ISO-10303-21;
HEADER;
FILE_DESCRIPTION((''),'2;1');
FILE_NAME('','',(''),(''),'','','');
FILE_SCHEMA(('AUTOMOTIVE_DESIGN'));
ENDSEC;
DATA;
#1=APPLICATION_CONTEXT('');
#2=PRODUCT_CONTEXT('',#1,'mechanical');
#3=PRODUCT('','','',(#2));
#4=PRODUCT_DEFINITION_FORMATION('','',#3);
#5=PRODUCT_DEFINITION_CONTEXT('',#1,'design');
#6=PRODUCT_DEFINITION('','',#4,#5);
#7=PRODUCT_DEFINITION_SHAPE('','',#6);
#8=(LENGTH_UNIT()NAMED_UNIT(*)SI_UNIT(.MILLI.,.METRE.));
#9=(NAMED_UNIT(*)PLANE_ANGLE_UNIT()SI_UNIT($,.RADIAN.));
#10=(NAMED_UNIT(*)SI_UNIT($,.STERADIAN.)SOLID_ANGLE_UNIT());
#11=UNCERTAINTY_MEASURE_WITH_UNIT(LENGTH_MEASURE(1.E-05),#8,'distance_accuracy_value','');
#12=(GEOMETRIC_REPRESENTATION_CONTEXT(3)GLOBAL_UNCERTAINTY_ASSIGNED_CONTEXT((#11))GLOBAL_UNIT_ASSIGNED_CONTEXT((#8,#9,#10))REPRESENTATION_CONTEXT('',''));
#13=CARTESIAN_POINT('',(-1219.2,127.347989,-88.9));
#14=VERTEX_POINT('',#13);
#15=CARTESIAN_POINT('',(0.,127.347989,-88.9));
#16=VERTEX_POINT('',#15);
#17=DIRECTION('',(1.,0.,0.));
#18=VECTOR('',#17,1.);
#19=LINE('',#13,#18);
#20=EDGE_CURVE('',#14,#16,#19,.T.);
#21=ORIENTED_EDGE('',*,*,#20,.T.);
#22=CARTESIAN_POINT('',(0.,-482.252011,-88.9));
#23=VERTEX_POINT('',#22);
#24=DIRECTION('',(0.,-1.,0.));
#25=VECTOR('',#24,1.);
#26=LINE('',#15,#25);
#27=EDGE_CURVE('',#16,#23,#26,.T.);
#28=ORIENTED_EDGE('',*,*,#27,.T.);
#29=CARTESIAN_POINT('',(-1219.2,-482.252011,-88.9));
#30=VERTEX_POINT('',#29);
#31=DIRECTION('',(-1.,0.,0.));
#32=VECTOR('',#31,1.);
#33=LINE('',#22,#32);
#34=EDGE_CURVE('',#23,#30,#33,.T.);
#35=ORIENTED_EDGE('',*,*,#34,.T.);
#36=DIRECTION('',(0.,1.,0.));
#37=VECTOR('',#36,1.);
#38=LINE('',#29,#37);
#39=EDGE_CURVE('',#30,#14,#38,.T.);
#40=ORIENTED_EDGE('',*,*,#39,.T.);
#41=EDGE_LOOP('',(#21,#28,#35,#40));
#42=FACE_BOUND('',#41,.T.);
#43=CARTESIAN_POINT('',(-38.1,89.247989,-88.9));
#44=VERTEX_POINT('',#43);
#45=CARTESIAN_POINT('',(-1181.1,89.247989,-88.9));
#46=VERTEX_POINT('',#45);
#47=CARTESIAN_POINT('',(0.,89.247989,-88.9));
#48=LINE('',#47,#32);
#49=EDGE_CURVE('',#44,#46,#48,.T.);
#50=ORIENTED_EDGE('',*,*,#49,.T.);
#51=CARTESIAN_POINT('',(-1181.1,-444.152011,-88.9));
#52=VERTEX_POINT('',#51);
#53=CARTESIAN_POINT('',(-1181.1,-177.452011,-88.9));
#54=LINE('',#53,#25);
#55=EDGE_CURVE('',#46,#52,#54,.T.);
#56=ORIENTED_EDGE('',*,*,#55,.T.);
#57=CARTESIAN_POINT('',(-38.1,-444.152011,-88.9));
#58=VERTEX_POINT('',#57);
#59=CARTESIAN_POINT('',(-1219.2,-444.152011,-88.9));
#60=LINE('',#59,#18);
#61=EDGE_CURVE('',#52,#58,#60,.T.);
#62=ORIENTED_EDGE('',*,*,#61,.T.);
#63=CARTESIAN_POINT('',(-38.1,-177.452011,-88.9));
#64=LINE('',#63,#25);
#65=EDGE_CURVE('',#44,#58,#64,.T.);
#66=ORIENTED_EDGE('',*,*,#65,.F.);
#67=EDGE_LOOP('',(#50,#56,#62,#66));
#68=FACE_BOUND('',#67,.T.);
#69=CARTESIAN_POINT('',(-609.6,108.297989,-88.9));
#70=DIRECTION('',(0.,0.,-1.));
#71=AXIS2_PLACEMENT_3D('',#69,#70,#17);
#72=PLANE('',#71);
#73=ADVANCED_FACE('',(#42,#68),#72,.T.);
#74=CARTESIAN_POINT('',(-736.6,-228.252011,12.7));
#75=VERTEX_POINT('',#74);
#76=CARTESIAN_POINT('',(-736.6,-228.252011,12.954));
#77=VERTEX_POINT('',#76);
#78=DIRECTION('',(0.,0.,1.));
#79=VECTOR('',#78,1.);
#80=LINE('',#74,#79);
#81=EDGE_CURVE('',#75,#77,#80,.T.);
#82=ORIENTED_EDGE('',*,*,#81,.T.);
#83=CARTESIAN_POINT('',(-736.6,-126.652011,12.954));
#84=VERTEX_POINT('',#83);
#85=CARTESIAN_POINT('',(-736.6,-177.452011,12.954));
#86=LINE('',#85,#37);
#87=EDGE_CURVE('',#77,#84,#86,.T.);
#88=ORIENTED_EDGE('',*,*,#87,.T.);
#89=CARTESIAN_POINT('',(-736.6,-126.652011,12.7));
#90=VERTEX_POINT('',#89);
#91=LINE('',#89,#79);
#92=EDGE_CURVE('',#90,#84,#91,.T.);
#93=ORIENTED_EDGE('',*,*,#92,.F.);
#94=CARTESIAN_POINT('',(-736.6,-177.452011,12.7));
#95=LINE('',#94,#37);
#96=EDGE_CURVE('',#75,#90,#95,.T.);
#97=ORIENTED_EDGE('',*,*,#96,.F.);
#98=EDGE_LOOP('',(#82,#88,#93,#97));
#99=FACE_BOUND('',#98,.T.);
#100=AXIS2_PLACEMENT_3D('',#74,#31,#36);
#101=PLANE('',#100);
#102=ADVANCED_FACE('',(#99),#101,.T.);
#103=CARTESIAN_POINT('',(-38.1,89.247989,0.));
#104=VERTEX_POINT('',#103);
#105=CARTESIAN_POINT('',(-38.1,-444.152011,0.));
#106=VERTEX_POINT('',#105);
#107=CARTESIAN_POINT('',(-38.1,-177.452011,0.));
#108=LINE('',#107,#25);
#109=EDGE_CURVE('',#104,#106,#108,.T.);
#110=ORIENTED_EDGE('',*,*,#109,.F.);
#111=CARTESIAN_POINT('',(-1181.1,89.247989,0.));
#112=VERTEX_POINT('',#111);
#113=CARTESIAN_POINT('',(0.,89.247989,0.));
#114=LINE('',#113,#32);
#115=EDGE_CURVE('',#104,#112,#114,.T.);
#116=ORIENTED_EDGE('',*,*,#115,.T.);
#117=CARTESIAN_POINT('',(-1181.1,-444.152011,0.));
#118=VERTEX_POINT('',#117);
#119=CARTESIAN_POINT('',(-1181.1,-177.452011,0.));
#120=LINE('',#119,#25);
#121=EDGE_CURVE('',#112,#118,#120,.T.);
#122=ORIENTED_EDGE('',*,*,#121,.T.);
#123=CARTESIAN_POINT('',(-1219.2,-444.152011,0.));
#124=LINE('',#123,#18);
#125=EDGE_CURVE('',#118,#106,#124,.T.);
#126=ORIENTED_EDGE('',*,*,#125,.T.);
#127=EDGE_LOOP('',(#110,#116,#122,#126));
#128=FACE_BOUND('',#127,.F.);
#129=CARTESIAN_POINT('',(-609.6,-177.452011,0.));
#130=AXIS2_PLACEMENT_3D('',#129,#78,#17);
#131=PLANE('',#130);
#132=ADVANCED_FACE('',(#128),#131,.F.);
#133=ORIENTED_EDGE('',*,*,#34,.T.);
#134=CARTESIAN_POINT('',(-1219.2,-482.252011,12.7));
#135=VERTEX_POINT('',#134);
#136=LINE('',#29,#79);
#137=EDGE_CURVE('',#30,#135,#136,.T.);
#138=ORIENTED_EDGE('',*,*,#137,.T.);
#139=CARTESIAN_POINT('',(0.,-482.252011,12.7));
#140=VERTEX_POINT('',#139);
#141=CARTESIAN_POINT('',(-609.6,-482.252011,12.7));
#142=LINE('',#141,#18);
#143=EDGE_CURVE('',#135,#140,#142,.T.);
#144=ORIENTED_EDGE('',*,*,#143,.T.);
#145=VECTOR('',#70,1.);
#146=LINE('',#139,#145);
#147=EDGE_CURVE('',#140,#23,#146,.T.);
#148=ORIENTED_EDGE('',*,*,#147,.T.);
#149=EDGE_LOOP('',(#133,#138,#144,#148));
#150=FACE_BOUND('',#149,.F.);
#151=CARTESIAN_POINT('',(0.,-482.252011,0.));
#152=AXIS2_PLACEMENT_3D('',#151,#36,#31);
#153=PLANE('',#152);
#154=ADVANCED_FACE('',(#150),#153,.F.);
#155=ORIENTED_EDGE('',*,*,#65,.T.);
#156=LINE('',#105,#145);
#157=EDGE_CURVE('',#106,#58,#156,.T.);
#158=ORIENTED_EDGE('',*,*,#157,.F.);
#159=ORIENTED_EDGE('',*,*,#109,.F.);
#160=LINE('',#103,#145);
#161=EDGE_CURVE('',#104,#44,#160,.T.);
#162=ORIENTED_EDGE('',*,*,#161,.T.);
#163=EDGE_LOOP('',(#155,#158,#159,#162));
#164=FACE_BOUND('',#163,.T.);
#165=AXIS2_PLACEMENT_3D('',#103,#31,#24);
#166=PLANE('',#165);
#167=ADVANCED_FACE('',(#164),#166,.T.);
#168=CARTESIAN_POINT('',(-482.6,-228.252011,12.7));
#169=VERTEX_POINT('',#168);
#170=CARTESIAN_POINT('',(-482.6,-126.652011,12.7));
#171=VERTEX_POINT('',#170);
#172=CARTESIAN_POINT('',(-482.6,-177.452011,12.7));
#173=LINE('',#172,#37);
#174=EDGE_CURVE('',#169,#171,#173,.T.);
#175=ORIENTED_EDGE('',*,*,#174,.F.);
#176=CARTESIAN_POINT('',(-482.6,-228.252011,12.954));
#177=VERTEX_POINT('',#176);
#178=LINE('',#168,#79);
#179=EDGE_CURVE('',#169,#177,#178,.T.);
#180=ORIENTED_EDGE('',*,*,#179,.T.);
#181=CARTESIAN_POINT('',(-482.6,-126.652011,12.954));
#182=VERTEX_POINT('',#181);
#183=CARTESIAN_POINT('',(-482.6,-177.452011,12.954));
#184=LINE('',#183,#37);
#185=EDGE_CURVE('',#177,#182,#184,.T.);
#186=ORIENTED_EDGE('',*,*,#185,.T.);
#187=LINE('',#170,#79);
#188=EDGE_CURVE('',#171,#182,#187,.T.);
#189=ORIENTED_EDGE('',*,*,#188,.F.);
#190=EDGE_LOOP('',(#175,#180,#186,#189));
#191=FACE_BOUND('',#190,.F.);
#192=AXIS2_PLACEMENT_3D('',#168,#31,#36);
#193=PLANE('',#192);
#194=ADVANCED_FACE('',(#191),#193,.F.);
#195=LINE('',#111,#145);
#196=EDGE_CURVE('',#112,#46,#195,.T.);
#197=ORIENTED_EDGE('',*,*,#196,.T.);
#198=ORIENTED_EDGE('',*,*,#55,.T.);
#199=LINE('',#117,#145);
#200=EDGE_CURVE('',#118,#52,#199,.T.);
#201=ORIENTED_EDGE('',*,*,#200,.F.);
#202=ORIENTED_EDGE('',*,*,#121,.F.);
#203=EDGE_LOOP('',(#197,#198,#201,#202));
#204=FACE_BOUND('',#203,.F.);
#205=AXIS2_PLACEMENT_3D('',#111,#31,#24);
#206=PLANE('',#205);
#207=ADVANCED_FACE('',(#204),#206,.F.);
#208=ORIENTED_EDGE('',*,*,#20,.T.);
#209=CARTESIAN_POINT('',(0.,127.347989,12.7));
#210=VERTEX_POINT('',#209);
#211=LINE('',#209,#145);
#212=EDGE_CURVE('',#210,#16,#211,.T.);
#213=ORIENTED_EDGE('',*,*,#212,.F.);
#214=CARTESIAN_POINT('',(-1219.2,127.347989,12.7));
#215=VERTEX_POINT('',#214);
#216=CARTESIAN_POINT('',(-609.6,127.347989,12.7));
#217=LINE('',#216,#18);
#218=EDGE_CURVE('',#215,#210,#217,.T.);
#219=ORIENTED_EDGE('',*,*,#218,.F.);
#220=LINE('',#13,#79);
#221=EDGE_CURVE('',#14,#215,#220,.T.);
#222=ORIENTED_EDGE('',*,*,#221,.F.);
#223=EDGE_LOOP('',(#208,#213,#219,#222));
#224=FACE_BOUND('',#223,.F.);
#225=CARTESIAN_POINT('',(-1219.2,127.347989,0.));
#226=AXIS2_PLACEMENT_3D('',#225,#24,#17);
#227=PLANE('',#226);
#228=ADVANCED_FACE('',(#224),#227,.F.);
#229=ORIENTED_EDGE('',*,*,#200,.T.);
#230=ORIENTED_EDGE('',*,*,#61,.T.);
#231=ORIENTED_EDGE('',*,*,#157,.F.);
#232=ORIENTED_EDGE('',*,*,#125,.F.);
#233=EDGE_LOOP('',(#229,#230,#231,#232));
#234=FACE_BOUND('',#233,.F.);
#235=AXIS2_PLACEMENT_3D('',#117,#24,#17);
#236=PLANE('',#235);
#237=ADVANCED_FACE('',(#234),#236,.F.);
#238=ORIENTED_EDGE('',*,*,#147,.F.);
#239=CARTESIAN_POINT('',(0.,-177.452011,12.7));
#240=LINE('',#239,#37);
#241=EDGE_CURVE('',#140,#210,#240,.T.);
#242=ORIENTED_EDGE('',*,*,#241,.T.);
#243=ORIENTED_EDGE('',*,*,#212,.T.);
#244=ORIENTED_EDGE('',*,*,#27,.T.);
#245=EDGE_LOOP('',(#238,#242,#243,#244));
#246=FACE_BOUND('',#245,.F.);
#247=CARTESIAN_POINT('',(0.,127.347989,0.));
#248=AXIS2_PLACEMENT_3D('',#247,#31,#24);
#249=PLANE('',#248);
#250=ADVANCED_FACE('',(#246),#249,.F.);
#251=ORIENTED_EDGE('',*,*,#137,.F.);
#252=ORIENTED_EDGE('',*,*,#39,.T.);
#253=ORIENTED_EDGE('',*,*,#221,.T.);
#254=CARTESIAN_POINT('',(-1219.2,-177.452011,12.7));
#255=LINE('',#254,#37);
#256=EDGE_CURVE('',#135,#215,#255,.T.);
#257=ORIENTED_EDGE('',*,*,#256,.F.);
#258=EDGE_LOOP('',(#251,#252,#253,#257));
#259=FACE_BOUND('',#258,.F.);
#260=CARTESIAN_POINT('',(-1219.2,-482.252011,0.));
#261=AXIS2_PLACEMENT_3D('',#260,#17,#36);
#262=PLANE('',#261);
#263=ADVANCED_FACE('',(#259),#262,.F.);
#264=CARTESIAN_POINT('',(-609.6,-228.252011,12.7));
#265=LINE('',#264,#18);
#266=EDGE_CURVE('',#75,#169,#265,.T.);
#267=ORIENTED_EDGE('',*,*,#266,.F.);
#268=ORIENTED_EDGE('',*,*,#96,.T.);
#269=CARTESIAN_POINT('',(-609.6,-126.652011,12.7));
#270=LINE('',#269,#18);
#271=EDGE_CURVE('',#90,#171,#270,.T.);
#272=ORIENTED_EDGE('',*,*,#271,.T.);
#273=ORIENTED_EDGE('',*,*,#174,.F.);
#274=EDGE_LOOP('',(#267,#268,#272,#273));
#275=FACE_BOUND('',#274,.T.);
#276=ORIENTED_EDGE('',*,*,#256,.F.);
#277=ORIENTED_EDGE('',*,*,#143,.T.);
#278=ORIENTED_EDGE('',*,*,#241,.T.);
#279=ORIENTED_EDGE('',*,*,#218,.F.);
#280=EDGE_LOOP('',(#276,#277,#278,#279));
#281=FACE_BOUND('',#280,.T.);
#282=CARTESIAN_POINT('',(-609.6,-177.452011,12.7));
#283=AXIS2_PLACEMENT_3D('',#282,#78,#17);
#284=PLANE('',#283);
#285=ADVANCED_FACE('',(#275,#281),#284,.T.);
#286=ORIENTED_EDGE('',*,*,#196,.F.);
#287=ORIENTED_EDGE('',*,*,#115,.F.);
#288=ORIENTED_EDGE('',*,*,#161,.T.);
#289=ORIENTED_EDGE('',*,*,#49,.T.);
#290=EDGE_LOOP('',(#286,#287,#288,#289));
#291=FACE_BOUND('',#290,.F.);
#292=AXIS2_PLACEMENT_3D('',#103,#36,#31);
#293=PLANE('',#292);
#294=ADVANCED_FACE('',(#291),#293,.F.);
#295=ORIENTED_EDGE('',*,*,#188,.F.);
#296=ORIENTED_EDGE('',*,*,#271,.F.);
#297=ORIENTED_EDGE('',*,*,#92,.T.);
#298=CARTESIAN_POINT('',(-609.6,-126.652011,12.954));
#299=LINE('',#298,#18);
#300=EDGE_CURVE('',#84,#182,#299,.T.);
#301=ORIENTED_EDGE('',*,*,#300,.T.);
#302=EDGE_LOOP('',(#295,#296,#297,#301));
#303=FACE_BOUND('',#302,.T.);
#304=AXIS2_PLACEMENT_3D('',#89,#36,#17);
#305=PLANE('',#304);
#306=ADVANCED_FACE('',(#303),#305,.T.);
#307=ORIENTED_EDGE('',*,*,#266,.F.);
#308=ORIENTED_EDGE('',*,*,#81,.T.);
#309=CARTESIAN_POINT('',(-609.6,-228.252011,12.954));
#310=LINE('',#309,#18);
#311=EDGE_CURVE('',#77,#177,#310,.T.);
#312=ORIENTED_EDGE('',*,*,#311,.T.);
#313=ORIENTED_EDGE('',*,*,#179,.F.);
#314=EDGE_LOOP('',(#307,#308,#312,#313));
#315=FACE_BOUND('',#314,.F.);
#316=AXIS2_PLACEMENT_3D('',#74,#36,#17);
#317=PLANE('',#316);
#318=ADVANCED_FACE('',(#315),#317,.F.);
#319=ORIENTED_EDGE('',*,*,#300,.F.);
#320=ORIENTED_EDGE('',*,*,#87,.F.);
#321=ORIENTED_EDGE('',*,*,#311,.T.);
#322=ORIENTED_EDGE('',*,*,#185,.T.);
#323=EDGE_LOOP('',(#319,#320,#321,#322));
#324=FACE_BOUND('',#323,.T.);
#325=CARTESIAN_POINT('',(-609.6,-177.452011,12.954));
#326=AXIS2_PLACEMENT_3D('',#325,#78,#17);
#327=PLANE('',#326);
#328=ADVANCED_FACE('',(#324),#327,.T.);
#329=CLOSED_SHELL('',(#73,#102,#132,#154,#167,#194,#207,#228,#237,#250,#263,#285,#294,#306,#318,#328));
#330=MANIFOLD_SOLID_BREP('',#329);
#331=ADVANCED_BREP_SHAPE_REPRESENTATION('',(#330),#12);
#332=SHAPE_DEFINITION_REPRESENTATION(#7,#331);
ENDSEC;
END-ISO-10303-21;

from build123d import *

# Parameters (mm, degrees)
F0_W     = 1219.2
F0_H     = 609.6
F1_DEPTH = 12.7
F2_W     = 38.1
F2_H     = 533.4
F3_DEPTH = 88.9
F4_W     = 254
F4_H     = 101.6
F5_DEPTH = 0.254


# Not quite as in the source:
# - a length typed as a fraction of an inch, garbled in the dataset ("3 / 203.2 mm" for 3/8 in), is restored


with BuildPart() as f1:
    # F0 (on Top) → F1 (new body)
    with BuildSketch(Plane.XY):
        with Locations((-609.6, -177.4520107999)):
            Rectangle(F0_W, F0_H)
    extrude(amount=F1_DEPTH)

    # F2 (on face) → F3 (join)
    with BuildSketch(Plane(origin=(0, 0, 0), x_dir=(1, 0, 0), z_dir=(0, 0, -1))):
        Polygon((-1181.1, -89.2479892001), (-1219.2, -89.2479892001), (-1219.2, -127.3479892001), (0, -127.3479892001), (0, -89.2479892001), (-38.1, -89.2479892001), (-1167.365193367, -89.2479892001), align=None)
        Polygon((0, 482.2520107999), (-1219.2, 482.2520107999), (-1219.2, 444.1520107999), (-1181.1, 444.1520107999), (-1167.365193367, 444.1520107999), (-38.1, 444.1520107999), (0, 444.1520107999), align=None)
        with Locations((-1200.15, 177.4520107999)):
            Rectangle(F2_W, F2_H)
        with Locations((-19.05, 177.4520107999)):
            Rectangle(F2_W, F2_H)
    extrude(amount=F3_DEPTH)

    # F4 (on face) → F5 (join)
    with BuildSketch(Plane.XY.offset(12.7)):
        with Locations((-609.6, -177.4520107999)):
            Rectangle(F4_W, F4_H)
    extrude(amount=F5_DEPTH)


solid = f1.part
